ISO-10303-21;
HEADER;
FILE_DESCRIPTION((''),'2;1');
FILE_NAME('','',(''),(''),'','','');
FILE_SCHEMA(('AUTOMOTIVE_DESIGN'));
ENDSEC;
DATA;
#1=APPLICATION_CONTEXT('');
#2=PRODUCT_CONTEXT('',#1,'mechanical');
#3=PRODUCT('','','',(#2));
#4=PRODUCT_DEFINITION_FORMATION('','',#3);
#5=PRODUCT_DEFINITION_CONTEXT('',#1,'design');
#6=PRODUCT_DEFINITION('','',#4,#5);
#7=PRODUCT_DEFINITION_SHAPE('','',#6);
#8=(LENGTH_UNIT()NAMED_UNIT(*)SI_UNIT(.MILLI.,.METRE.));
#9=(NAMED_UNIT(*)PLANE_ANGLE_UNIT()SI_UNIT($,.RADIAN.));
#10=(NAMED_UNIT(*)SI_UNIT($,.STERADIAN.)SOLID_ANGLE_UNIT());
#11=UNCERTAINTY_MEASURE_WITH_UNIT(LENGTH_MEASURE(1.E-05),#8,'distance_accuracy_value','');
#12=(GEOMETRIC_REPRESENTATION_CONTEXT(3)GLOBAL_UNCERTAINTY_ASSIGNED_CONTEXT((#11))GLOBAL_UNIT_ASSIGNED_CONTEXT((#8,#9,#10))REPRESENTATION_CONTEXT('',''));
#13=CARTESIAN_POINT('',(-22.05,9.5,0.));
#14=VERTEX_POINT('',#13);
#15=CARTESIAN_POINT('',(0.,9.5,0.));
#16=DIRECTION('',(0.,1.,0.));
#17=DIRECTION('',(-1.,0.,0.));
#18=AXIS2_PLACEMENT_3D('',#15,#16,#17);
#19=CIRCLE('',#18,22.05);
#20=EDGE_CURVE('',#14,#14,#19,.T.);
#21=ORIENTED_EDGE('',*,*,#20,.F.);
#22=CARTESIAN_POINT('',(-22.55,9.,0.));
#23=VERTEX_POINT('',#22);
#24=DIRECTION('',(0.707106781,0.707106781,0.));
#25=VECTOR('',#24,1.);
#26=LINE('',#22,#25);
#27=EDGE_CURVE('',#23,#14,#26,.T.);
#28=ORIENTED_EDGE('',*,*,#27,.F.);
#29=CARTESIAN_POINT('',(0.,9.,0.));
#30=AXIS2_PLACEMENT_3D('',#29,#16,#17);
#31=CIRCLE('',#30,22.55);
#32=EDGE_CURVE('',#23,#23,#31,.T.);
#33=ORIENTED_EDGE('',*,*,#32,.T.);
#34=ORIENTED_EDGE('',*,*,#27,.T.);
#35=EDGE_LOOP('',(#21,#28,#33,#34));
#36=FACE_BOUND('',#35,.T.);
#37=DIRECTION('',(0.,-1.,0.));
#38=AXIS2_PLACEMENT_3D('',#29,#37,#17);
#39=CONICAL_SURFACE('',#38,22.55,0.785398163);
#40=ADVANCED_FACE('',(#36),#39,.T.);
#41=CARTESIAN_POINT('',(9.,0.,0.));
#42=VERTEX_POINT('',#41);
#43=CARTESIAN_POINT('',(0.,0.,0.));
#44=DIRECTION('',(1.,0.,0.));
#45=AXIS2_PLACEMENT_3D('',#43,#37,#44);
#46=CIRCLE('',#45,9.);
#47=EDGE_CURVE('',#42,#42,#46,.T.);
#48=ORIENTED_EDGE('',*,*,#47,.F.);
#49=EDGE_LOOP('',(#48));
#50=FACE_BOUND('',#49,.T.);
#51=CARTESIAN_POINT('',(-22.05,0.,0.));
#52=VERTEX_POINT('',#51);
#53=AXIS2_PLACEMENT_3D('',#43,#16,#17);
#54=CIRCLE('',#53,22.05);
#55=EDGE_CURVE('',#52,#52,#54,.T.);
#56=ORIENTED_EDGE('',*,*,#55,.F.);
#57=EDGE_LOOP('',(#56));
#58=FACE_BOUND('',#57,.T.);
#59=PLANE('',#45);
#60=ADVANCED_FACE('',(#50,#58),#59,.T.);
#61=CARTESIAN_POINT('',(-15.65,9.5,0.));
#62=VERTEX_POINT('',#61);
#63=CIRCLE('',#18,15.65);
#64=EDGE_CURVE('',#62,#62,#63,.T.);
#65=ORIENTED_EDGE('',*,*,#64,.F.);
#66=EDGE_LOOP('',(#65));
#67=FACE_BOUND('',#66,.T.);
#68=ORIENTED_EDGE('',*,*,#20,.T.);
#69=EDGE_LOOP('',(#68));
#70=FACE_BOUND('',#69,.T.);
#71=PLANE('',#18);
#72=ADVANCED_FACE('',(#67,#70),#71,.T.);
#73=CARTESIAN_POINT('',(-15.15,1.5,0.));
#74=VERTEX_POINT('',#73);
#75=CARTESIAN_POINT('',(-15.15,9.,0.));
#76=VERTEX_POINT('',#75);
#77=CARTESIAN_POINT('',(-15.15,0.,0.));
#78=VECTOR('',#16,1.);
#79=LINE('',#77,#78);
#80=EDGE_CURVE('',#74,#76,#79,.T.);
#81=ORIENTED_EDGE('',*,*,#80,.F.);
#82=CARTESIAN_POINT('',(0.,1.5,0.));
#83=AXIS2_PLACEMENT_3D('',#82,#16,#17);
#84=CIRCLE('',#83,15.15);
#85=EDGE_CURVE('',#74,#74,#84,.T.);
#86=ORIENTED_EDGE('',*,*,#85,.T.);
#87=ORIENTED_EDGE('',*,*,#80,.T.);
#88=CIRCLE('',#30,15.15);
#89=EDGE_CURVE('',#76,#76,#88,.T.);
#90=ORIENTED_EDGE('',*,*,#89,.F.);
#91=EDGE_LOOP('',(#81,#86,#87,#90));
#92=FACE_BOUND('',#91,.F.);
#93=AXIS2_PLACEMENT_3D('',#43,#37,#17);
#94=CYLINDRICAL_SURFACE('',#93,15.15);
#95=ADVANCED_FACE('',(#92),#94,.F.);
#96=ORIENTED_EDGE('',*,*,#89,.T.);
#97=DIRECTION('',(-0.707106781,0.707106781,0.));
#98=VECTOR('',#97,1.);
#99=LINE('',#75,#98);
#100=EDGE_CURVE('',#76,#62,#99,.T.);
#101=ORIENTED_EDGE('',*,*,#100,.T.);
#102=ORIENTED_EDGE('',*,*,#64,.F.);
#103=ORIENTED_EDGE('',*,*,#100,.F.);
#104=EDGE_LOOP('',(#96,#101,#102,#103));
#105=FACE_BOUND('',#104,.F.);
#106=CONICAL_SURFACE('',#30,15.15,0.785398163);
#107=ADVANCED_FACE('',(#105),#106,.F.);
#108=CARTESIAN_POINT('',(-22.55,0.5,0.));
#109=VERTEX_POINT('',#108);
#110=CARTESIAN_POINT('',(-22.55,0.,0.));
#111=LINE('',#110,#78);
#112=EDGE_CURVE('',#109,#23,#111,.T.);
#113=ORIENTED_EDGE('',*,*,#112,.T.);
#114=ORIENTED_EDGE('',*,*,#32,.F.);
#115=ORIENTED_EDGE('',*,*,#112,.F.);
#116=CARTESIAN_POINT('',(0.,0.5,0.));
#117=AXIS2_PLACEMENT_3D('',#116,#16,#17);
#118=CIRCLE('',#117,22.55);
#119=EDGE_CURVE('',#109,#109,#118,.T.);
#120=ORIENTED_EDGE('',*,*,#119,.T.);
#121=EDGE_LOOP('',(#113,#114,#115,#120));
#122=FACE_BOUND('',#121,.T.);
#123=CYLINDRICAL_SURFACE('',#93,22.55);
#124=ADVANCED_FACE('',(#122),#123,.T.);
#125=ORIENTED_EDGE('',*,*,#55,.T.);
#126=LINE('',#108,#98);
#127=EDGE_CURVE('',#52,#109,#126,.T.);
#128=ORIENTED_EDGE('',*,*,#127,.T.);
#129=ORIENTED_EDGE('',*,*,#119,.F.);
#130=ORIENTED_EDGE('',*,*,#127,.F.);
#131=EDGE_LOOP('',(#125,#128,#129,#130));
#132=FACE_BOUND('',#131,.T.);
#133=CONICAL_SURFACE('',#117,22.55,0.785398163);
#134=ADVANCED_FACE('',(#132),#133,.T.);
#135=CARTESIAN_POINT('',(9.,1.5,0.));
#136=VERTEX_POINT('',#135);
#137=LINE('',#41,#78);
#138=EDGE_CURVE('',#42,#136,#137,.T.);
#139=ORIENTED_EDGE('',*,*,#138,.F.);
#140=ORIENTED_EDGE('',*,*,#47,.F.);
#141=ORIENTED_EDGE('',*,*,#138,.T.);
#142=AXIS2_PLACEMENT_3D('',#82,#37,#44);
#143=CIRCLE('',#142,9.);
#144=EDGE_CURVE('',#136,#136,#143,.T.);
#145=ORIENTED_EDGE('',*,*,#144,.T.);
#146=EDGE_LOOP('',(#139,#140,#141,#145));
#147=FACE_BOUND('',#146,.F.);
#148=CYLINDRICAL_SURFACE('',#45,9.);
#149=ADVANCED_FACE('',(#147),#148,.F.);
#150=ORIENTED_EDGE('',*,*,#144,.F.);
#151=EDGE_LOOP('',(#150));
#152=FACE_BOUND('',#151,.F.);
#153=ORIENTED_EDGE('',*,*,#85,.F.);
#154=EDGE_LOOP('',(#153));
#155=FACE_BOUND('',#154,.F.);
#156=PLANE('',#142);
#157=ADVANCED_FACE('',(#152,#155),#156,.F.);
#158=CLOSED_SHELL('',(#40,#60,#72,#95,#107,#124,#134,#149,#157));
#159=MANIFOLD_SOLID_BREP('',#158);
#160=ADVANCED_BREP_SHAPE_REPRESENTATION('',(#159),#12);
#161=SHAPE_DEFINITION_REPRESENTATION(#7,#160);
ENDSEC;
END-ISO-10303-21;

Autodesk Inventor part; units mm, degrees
ref_plane "YZ Plane" through (0, 0, 0) normal (1, 0, 0) x (0, 1, 0)
ref_plane "XZ Plane" through (0, 0, 0) normal (0, 1, 0) x (-1, 0, 0)
ref_plane "XY Plane" through (0, 0, 0) normal (0, 0, 1) x (1, 0, 0)
sketch "Sketch1" plane through (0, 0, 0) normal (0, 1, 0) x (-1, 0, 0)
  point P0 (0, 0)
sketch "Sketch2" plane through (0, 0, 0) normal (0, 1, 0) x (-1, 0, 0)
  circle A0 centre (0, 0) radius 15.15
  circle A1 centre (0, 0) radius 17.65
  circle A2 centre (0, 0) radius 22.55
  circle A3 centre (0, 0) radius 20.05
  dimension "d0" = 30.3
  dimension "d1" = 2.5
  dimension "d2" = 45.1
  dimension "d3" = 2.5
extrude "Extrusion1" add sketch "Sketch2" along normal blind 9.5 contours A1 | A2 | A3
sketch "Sketch3" plane through (0, 0, 0) normal (0, -1, 0) x (1, 0, 0)
  circle A0 centre (0, 0) radius 15.15 projected
  circle A1 centre (0, 0) radius 9
  dimension "d8" = 18
extrude "Extrusion2" add sketch "Sketch3" against normal blind 1.5
chamfer "Chamfer1" distance 0.5 angle 45 3 edges at (22.55, 0, 0) (15.15, 9.5, 0) (22.55, 9.5, 0)
properties part number "Bearing Spacer"
